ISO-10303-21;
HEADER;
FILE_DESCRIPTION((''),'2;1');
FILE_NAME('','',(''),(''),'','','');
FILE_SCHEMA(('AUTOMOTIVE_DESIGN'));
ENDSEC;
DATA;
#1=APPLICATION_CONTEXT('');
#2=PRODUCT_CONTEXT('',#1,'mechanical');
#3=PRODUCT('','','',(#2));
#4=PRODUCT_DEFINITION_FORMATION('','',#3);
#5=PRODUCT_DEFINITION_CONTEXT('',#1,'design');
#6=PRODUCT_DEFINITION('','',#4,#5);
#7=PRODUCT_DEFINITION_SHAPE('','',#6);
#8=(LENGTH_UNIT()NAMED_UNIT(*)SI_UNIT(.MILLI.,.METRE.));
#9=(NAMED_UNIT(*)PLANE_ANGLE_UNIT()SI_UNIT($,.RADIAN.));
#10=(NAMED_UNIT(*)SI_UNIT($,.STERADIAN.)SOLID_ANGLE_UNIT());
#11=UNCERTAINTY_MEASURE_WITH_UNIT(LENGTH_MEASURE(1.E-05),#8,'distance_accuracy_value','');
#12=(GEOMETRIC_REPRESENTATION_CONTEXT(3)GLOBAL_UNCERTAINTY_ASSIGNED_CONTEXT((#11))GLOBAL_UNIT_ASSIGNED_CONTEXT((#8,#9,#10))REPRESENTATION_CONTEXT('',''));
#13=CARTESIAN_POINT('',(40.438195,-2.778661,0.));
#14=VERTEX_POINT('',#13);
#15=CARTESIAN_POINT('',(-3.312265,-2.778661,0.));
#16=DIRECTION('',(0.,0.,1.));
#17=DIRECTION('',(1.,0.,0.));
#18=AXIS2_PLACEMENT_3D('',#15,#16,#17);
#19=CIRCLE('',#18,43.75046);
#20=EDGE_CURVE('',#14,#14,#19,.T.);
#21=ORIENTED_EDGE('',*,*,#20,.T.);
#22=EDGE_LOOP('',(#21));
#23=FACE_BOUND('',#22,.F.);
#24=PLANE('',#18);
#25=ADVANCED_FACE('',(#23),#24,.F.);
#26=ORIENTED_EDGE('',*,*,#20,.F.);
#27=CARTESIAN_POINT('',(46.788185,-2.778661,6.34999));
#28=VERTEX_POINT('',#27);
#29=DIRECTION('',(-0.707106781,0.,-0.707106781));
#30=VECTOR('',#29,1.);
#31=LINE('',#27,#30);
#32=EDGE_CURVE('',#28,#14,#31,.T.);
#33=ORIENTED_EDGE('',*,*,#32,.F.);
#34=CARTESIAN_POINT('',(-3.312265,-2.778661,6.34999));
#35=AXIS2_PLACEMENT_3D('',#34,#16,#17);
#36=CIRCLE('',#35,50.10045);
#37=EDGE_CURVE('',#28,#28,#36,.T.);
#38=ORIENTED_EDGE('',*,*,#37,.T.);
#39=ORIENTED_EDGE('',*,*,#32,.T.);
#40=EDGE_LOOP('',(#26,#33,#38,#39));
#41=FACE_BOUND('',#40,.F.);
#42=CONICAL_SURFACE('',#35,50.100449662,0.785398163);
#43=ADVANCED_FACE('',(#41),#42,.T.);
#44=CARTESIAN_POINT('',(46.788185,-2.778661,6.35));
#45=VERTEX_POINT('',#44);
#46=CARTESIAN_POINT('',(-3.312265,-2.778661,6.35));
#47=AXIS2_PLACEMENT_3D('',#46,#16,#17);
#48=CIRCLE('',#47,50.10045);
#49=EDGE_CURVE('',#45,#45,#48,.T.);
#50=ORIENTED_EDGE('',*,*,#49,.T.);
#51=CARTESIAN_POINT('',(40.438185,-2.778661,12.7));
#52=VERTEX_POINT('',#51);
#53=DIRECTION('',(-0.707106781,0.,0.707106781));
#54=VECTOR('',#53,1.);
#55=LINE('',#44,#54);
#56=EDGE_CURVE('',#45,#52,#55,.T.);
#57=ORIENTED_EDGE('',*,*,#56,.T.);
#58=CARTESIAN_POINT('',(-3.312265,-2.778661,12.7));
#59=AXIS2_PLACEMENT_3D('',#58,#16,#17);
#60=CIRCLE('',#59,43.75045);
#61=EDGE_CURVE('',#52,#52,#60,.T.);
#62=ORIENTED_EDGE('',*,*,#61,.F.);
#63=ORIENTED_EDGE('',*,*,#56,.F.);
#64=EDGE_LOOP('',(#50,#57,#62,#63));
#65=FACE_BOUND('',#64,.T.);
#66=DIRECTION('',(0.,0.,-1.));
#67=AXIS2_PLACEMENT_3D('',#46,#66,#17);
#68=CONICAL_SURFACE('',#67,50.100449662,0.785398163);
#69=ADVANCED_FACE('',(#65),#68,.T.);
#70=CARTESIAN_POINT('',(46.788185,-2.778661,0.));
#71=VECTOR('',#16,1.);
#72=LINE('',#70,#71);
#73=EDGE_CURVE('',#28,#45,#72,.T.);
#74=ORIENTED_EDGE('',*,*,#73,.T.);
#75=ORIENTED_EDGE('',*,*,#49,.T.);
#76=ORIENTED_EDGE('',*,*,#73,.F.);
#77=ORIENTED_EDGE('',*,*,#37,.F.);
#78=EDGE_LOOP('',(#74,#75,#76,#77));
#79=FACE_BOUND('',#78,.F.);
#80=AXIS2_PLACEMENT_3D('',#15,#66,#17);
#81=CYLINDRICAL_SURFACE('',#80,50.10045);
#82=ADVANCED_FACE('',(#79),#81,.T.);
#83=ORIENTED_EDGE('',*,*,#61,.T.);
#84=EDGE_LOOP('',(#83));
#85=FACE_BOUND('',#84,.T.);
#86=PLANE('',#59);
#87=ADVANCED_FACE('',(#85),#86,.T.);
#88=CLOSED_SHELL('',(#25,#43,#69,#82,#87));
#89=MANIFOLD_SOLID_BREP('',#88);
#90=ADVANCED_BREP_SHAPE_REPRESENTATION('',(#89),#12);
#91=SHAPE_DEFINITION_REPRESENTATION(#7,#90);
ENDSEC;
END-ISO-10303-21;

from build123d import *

# Parameters (mm, degrees)
F0_R     = 50.1004496622
F1_DEPTH = 12.7
F2_SIZE  = 6.35
F3_SIZE  = 6.34999


# Not quite as in the source:
# - a fillet or chamfer is up to 0.001 mm smaller than in the source, because OpenCascade refuses the exact size


with BuildPart() as f1:
    # F0 (on Top) → F1 (new body)
    with BuildSketch(Plane.XY):
        with Locations((-3.3122645349, -2.7786610853)):
            Circle(F0_R)
    extrude(amount=F1_DEPTH)

    # F2
    f2_edges = [f1.edges().sort_by_distance(p)[0] for p in [
        (-53.412714, -2.778661, 12.7),
    ]]
    chamfer(f2_edges, length=F2_SIZE)

    # F3 (size 6.35 in the source; OpenCascade refuses exactly that, so slightly less here)
    f3_edges = [f1.edges().sort_by_distance(p)[0] for p in [
        (-53.412714, -2.778661, 0),
    ]]
    chamfer(f3_edges, length=F3_SIZE)


solid = f1.part
